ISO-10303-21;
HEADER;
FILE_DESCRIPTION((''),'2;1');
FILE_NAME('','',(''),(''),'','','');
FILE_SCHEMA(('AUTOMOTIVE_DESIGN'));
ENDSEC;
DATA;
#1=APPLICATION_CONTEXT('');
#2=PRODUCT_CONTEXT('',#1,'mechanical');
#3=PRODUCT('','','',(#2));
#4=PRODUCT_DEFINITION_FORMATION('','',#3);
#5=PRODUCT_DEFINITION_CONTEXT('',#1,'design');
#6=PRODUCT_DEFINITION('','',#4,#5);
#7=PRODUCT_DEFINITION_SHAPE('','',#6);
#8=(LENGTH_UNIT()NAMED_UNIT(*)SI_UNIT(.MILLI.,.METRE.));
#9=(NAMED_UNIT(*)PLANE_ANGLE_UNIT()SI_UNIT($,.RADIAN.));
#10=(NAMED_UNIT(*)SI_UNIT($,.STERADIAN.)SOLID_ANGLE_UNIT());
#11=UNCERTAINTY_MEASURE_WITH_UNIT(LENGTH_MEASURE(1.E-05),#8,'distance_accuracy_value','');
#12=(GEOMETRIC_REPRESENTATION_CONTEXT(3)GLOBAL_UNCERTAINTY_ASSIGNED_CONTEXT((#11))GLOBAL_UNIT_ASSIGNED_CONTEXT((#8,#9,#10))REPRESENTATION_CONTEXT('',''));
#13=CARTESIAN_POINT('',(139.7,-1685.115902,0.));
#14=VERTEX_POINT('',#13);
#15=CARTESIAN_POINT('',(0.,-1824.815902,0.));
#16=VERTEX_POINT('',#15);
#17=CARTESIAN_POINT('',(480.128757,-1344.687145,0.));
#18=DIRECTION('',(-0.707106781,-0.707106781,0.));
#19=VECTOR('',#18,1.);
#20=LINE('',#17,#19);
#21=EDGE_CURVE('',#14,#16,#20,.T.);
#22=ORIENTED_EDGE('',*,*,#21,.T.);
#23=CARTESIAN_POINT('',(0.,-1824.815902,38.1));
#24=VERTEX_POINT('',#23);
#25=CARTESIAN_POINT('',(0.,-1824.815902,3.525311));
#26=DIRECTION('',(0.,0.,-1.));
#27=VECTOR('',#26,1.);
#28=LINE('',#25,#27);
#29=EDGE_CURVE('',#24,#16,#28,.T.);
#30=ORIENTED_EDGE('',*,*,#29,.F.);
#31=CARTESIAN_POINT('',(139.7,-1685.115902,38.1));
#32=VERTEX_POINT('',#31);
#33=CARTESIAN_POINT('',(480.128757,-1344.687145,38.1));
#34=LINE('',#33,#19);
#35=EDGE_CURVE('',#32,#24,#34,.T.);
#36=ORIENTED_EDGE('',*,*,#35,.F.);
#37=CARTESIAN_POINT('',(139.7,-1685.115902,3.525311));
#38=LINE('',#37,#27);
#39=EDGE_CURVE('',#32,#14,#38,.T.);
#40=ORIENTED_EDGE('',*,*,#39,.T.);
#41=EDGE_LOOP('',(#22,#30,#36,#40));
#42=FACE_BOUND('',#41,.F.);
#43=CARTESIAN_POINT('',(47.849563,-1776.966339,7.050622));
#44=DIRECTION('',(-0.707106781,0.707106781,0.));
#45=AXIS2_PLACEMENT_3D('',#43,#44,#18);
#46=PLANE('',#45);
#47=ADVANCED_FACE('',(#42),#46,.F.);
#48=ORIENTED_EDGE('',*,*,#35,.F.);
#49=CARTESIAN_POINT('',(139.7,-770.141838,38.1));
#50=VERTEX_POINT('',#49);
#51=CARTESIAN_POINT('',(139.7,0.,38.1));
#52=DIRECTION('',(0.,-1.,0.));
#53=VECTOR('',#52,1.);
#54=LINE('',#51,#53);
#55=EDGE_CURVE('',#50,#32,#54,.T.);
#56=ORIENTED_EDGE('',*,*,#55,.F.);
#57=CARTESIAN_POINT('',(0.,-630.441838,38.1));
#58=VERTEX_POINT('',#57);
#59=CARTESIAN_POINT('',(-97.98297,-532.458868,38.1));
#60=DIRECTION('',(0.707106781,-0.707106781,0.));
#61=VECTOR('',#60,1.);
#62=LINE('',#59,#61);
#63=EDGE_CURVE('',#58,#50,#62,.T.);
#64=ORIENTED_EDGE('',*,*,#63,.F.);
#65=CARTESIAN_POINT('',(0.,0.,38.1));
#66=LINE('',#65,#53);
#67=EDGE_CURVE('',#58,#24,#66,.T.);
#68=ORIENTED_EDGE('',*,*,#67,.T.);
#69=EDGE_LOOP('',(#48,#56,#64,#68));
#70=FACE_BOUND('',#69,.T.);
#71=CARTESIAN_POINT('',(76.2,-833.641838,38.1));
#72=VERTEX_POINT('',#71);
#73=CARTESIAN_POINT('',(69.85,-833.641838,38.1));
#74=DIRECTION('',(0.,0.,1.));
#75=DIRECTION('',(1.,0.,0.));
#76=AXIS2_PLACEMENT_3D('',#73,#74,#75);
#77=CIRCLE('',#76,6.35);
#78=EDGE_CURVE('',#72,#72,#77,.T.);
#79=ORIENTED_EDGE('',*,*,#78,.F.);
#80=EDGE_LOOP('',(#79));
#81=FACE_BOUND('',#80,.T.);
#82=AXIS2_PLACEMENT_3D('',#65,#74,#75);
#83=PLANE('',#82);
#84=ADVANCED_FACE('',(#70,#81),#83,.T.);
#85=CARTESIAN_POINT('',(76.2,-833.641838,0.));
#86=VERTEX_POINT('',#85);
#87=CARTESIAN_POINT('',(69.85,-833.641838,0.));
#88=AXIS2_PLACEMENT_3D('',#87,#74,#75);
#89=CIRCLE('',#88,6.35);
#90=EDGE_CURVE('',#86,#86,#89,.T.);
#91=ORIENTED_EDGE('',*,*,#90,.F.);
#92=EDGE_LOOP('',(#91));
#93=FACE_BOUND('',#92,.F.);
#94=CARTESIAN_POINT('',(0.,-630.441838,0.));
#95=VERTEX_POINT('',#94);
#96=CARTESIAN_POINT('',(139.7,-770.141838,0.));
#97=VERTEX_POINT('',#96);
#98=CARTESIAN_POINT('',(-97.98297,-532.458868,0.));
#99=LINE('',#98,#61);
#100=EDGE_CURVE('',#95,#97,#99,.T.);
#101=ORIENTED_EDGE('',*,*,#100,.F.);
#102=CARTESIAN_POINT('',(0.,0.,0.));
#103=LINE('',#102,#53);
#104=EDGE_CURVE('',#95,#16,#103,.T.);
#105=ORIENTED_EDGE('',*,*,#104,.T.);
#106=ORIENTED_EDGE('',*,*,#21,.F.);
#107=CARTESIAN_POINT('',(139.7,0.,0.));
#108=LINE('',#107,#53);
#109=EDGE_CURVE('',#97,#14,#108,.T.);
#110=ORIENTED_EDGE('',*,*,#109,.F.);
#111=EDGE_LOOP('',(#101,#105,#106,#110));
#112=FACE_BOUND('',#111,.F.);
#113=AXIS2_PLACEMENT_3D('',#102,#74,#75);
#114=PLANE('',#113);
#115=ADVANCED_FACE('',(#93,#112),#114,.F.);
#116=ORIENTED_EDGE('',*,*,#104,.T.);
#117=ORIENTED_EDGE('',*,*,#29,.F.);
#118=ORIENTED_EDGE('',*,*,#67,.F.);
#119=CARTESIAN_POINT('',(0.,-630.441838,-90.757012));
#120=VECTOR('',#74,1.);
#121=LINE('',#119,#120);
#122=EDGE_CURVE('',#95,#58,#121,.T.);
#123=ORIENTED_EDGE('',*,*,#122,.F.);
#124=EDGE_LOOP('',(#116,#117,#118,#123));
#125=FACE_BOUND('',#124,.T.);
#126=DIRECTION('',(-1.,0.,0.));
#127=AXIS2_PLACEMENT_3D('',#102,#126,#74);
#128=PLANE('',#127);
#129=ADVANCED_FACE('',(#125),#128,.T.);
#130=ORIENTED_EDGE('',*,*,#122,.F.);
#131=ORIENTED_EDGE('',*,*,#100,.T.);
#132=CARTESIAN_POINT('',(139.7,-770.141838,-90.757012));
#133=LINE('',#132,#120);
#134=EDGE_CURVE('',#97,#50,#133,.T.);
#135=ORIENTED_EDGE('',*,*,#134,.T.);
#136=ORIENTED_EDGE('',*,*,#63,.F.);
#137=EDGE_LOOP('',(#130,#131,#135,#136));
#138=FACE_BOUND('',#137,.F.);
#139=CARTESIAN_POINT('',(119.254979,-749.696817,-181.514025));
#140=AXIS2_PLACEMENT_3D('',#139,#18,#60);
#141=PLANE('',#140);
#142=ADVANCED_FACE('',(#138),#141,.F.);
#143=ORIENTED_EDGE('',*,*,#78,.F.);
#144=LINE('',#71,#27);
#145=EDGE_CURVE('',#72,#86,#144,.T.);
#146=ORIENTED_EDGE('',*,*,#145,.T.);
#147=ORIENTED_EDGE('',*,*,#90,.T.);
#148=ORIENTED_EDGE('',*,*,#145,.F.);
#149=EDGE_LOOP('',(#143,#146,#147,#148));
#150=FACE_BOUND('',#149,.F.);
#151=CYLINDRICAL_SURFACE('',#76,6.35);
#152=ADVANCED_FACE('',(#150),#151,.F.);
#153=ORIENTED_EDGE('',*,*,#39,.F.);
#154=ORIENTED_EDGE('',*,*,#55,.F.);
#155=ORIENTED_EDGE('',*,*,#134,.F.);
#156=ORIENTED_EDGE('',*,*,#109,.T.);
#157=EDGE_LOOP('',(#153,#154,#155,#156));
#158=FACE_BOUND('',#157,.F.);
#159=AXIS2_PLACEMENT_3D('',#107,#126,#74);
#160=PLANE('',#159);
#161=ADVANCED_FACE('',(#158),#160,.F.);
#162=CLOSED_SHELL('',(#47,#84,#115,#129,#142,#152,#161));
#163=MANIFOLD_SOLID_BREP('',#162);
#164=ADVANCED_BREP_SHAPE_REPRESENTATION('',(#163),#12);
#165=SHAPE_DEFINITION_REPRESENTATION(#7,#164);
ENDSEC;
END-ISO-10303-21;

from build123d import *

# Parameters (mm, degrees)
F0_W      = 139.7
F0_H      = 38.1
F1_DEPTH  = 1828.8
F3_W      = 331.3202857971
F3_H      = 260.5838701129
F4_DEPTH  = 101.6
F7_W      = 1553.4552037716
F7_H      = 1155.3529500961
F8_DEPTH  = 762
F9_R      = 6.35
F10_DEPTH = 38.101


# Not quite as in the source:
# - a feature names something its author has since deleted; it is built from what else it names


with BuildPart() as f1:
    # F0 (on Front) → F1 (new body)
    with BuildSketch(Plane.XZ):
        with Locations((69.85, 19.05)):
            Rectangle(F0_W, F0_H)
    extrude(amount=F1_DEPTH)

    # F3 (on face) → F4 (cut)
    with BuildSketch(Plane(origin=(984.25, -984.25, 0), x_dir=(-0.7071067812, -0.7071067812, 0), z_dir=(-0.7071067812, 0.7071067812, 0))):
        with Locations((1222.6701974869, 7.0506222546)):
            Rectangle(F3_W, F3_H)
    extrude(amount=F4_DEPTH, mode=Mode.SUBTRACT)

    # F7 (on face) → F8 (cut)
    with BuildSketch(Plane(origin=(-315.2209189803, -315.2209189803, 0), x_dir=(0.7071067812, -0.7071067812, 0), z_dir=(-0.7071067812, -0.7071067812, 0))):
        with Locations((614.4417077303, -181.5140247345)):
            Rectangle(F7_W, F7_H)
    extrude(amount=-F8_DEPTH, mode=Mode.SUBTRACT)

    # F9 (on face) → F10 (cut, through all)
    with BuildSketch(Plane.XY.offset(38.1)):
        with Locations((69.85, -833.6418379607)):
            Circle(F9_R)
    extrude(amount=-F10_DEPTH, mode=Mode.SUBTRACT)


solid = f1.part
